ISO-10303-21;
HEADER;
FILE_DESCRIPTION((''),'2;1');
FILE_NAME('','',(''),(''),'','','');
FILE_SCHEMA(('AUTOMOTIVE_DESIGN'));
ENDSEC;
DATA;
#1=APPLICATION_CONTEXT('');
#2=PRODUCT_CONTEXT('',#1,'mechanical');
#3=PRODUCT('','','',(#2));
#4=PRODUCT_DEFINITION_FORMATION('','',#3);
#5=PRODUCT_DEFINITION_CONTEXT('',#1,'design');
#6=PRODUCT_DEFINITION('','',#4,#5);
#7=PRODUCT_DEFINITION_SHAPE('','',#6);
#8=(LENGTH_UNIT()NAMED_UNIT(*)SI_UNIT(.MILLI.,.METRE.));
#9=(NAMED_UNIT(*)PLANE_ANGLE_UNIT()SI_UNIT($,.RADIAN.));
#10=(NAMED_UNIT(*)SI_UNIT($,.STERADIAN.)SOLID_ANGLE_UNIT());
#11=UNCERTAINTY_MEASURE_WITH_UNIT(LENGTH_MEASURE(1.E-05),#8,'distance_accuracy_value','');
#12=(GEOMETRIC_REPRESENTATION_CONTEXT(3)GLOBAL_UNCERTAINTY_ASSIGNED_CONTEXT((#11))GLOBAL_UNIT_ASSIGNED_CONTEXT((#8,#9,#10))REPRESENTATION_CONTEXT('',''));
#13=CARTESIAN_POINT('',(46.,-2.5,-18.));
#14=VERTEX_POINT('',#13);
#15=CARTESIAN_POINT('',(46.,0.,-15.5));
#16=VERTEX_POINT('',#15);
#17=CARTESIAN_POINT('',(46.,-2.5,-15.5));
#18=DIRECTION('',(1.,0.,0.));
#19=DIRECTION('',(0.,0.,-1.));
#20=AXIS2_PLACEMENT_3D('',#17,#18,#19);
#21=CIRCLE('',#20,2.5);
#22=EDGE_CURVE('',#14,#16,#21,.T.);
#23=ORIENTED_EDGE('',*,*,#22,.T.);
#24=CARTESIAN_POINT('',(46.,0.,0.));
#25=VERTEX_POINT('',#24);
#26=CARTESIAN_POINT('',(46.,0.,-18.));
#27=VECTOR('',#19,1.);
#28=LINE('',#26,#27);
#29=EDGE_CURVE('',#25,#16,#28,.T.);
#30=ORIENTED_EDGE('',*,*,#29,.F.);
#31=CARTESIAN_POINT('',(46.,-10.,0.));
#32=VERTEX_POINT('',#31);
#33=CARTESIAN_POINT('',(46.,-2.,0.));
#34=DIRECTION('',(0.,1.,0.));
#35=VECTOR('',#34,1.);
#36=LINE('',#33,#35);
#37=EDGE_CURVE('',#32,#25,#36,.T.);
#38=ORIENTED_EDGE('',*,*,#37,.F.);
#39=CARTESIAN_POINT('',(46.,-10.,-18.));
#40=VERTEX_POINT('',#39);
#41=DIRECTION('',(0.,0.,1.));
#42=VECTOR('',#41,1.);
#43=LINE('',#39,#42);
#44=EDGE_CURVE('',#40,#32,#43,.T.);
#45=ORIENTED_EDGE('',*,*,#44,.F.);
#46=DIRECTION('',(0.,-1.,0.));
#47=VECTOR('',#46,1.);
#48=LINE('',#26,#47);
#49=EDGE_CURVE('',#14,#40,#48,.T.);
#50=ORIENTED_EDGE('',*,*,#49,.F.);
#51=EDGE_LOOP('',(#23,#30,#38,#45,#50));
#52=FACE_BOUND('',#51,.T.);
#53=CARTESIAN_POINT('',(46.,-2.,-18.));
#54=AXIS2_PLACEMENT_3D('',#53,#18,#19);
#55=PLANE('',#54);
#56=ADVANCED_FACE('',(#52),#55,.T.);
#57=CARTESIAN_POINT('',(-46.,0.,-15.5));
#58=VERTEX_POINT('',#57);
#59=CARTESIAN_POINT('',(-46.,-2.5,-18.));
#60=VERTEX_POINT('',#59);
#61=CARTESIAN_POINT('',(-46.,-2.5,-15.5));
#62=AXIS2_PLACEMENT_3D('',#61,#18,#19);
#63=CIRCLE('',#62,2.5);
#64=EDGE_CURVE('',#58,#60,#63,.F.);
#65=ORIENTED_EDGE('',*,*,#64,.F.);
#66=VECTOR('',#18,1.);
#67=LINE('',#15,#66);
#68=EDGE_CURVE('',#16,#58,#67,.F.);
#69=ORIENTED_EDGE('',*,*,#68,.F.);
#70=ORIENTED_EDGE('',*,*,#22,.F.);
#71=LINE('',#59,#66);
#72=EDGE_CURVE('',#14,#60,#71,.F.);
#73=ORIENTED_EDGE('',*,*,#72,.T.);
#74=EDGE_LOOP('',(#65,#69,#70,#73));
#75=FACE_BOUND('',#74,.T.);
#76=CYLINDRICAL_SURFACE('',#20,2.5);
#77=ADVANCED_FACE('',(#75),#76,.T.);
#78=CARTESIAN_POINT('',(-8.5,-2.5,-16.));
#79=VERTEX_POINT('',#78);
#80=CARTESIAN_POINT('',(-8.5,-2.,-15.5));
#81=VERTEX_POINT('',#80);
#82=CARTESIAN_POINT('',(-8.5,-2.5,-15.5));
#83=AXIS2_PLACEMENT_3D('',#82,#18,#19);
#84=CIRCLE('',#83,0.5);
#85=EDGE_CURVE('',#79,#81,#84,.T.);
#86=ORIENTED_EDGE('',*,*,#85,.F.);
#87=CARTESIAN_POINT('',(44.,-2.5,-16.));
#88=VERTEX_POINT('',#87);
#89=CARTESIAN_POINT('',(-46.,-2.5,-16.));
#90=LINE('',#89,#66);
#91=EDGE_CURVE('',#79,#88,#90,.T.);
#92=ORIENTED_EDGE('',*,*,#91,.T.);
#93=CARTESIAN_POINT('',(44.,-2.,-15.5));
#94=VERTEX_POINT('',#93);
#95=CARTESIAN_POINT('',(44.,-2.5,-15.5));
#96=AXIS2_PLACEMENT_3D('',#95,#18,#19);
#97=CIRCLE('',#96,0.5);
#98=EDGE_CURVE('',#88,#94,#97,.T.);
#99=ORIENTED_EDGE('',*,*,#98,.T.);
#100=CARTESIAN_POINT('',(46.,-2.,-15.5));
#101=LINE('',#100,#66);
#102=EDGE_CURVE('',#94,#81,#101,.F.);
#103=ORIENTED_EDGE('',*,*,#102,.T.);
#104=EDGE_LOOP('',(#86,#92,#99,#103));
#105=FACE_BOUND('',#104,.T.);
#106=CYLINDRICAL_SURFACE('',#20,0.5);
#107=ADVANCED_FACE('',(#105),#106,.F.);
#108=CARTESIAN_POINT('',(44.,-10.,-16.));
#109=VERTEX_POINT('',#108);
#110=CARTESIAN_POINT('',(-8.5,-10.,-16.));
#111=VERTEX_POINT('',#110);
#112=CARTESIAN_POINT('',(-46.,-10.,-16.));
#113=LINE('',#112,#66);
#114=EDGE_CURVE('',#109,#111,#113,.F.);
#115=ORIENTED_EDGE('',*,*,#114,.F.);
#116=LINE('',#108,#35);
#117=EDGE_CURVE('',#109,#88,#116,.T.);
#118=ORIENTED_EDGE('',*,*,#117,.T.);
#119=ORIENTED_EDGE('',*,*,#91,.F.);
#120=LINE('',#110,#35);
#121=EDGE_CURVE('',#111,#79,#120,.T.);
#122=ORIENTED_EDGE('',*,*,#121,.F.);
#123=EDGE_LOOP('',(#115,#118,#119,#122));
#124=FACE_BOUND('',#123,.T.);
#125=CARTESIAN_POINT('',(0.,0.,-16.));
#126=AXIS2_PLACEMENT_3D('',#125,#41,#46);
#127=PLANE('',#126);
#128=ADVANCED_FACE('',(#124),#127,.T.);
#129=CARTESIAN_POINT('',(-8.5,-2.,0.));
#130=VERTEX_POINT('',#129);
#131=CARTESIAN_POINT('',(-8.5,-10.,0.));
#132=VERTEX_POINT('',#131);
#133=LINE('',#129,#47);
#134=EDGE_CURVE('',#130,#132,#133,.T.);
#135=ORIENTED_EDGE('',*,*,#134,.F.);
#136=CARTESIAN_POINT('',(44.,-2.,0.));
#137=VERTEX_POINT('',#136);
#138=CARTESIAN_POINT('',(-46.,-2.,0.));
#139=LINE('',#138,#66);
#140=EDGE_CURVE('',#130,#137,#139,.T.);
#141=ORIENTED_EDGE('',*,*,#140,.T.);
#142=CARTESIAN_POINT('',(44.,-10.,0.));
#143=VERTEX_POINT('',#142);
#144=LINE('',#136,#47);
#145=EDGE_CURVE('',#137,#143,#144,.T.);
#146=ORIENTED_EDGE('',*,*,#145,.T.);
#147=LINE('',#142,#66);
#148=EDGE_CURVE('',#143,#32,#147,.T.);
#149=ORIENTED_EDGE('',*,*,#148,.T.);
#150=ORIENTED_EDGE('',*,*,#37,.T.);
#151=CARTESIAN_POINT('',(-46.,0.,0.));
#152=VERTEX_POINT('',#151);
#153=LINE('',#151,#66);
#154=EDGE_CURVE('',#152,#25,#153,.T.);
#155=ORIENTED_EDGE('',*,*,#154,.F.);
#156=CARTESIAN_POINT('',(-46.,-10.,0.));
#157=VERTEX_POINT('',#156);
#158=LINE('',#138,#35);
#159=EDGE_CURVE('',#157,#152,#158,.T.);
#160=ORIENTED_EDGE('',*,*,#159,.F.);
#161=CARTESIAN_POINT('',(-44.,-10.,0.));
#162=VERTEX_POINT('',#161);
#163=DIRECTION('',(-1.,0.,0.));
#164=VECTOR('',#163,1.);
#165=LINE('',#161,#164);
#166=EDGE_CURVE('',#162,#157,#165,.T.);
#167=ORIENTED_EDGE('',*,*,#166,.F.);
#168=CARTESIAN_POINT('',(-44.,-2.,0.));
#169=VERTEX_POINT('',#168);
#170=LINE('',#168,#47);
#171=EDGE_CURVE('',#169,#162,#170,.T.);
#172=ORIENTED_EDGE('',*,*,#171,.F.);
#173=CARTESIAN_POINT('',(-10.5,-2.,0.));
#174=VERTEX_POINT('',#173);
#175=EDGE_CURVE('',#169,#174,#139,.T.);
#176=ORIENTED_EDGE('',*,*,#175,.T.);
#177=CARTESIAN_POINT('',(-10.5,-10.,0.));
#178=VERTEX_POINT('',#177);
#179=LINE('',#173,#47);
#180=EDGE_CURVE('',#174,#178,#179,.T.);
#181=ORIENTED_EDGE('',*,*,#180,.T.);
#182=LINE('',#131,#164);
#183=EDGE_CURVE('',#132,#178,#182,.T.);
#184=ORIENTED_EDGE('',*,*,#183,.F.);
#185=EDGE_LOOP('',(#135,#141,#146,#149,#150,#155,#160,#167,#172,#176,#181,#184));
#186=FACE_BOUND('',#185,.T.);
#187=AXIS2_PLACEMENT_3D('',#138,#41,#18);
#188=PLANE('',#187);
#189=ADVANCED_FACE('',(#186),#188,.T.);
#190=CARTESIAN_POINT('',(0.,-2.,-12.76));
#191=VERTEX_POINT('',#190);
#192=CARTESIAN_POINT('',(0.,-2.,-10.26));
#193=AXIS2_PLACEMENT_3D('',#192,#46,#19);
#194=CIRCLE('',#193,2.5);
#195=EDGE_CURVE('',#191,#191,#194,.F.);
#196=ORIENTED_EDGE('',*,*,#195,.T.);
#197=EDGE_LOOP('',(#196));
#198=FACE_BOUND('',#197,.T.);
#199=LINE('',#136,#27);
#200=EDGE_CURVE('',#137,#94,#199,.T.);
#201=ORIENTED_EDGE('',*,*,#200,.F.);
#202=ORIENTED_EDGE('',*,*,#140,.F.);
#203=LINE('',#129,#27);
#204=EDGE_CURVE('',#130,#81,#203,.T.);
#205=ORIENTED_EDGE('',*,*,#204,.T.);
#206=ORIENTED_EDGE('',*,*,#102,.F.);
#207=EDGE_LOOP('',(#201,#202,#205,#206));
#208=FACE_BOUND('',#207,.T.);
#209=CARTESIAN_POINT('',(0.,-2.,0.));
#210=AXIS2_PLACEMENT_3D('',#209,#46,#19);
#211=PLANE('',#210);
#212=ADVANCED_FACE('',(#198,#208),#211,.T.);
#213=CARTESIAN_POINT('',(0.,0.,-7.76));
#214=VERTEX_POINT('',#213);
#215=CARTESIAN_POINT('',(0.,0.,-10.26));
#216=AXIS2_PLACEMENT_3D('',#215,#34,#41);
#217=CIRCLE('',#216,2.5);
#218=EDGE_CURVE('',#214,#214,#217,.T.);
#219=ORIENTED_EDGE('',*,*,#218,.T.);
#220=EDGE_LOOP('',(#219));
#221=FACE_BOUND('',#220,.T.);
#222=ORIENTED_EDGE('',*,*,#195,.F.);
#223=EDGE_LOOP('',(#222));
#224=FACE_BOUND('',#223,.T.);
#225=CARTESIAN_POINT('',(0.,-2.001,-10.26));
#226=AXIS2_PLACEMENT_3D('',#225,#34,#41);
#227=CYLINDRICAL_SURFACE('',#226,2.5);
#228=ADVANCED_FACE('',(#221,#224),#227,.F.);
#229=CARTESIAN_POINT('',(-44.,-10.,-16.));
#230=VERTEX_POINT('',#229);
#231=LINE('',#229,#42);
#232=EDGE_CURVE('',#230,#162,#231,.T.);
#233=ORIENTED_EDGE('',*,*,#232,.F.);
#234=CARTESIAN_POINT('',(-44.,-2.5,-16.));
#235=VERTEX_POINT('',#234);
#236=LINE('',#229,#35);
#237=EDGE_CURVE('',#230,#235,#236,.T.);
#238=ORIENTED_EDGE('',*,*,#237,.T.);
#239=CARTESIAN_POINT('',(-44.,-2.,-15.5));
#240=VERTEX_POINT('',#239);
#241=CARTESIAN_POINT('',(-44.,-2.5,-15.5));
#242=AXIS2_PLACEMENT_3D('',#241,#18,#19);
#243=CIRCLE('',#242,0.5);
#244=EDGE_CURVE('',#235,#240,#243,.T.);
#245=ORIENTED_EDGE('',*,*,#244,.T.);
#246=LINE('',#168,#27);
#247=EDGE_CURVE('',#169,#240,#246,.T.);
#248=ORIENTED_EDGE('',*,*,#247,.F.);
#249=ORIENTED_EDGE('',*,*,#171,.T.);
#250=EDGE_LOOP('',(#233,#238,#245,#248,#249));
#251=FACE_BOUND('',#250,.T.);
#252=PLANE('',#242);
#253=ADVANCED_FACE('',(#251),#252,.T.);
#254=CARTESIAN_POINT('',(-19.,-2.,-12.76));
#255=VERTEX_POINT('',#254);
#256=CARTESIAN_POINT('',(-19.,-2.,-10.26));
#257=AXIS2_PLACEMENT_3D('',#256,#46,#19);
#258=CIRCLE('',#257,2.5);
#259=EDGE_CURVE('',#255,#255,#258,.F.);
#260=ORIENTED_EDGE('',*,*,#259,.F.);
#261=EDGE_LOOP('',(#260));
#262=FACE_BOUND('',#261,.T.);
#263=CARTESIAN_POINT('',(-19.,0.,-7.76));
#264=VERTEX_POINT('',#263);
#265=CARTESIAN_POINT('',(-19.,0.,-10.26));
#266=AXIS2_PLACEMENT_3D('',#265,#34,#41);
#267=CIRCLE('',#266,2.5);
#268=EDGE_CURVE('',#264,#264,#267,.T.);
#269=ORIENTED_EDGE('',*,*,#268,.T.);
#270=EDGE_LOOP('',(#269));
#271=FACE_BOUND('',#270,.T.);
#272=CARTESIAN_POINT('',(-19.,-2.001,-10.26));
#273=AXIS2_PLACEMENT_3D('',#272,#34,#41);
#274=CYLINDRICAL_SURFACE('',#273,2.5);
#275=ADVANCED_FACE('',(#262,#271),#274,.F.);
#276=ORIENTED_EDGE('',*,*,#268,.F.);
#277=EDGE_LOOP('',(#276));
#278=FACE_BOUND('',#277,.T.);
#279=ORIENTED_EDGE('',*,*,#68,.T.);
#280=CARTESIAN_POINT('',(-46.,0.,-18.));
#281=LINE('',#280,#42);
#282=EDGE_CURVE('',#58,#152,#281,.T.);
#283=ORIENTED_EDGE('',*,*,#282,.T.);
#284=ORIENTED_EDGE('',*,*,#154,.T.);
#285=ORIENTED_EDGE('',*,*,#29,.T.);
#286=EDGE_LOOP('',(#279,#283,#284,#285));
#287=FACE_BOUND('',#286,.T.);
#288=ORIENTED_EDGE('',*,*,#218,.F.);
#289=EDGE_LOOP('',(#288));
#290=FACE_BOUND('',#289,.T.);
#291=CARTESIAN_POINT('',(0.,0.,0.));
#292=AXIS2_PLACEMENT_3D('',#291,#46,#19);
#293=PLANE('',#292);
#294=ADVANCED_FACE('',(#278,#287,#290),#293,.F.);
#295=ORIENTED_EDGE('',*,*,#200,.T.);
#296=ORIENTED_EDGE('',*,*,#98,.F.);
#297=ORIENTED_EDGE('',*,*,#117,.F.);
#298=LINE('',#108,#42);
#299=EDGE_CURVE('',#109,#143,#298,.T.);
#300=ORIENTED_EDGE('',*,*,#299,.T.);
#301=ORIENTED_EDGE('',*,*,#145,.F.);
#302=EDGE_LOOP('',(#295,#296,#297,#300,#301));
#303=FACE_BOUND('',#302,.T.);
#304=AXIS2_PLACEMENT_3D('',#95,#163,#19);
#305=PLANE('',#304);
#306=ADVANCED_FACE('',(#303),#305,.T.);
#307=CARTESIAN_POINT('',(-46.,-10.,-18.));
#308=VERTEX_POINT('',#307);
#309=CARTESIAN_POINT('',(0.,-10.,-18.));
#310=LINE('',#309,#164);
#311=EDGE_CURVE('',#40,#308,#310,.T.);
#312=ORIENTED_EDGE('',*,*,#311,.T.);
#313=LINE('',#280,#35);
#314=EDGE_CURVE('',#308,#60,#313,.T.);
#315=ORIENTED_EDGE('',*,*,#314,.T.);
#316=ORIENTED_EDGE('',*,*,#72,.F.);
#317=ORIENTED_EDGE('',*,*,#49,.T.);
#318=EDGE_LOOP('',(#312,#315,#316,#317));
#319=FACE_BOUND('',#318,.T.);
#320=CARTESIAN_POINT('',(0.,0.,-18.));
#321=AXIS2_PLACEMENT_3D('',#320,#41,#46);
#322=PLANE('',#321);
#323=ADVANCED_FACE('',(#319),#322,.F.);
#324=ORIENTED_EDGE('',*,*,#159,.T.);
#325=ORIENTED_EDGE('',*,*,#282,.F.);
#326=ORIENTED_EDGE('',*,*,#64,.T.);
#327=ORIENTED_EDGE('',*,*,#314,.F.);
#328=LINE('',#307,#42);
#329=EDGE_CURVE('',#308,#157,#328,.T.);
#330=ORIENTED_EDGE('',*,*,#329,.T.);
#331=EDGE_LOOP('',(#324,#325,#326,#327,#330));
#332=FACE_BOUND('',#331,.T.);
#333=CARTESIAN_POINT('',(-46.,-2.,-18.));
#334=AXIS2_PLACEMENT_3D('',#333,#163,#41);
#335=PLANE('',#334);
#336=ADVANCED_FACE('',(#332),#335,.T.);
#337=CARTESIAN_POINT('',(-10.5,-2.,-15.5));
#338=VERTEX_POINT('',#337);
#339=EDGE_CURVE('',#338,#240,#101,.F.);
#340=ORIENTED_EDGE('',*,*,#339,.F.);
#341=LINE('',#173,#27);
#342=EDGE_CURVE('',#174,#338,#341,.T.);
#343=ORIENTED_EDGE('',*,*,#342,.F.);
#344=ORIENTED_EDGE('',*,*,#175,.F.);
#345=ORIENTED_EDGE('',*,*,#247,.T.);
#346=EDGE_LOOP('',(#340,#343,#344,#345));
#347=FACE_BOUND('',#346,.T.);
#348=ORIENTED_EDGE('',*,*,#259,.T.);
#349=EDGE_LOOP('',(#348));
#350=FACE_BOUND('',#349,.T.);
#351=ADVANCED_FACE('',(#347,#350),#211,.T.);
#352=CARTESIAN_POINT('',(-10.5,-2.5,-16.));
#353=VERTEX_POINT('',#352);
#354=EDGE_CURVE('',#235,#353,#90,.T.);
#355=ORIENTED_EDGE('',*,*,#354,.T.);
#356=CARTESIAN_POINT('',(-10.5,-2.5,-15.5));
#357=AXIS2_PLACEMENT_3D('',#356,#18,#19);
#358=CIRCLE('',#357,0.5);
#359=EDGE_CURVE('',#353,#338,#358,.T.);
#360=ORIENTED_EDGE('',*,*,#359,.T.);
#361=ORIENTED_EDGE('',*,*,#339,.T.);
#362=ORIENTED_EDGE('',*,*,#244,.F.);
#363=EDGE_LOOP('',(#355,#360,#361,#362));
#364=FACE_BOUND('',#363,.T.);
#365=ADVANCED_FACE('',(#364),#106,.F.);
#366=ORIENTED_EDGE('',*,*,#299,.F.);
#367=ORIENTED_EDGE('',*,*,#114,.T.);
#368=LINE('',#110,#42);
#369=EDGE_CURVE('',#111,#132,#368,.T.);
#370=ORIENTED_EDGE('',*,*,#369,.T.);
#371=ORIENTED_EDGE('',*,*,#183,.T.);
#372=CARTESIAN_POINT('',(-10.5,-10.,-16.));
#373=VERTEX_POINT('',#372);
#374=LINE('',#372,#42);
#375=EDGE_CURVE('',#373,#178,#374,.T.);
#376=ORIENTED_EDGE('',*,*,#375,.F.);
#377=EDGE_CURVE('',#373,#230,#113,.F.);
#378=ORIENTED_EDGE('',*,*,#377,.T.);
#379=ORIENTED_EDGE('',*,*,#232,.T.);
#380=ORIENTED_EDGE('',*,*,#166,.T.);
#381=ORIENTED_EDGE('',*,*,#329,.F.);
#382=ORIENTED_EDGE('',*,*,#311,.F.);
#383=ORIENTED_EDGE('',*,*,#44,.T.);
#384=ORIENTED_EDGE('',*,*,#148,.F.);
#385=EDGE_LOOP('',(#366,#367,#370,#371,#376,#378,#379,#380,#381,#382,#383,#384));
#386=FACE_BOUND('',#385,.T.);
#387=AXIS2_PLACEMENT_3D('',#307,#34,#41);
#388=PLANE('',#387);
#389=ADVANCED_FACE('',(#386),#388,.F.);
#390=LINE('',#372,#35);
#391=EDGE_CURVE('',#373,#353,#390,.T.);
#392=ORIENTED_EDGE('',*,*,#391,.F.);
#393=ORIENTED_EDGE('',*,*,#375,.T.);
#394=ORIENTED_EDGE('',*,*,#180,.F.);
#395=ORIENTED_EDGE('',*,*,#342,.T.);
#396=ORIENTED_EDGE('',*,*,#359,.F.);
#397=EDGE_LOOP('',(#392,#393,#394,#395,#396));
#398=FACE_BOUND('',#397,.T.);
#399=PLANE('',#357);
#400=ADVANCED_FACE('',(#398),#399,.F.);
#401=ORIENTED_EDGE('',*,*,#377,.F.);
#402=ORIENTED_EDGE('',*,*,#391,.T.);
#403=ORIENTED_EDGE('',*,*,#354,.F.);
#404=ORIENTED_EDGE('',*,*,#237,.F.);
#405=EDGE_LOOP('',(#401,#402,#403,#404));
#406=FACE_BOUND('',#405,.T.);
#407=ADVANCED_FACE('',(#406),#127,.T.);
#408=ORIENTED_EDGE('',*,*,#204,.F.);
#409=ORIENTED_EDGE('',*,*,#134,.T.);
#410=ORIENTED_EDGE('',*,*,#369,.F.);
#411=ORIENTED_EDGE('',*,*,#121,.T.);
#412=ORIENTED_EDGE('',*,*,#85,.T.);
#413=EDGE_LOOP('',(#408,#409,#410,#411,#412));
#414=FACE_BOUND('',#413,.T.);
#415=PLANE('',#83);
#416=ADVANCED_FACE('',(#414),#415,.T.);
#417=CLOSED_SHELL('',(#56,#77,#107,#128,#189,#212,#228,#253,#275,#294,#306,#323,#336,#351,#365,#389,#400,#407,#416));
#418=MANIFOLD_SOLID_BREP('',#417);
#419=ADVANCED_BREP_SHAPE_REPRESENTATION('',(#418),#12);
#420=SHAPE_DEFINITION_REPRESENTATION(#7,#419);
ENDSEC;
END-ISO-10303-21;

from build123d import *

# Parameters (mm, degrees)
SKETCH1_W                    = 92
SKETCH1_H                    = 18
BASE_FLANGE1_DEPTH           = 2
SKETCH11_R                   = 2.5
CUT_EXTRUDE1_DEPTH           = 2
EDGE_FLANGE1_STRIP_W         = 9
EDGE_FLANGE1_STRIP_H         = 2
EDGE_FLANGE1_STRIP_CUT_DEPTH = 92
EDGE_FLANGE1_DEPTH           = 92
BOSS_EXTRUDE2_DEPTH          = 2
LPATTERN1_COUNT              = 2
LPATTERN1_PITCH              = 35.5


# Sheet-metal steps are written as plain solids
with BuildPart() as part:
    # Sketch1 → Base-Flange1 (new body)
    with BuildSketch(Plane(origin=(0, 0, 0), x_dir=(1, 0, 0), z_dir=(0, 1, 0))):
        with Locations((0, 9)):
            Rectangle(SKETCH1_W, SKETCH1_H)
    extrude(amount=-BASE_FLANGE1_DEPTH)

    # Sketch11 → Cut-Extrude1 (cut)
    with BuildSketch(Plane(origin=(0, 0, 0), x_dir=(1, 0, 0), z_dir=(0, 1, 0))):
        with Locations(Location((0, 10.26, 0), (0, 0, 270))):
            Circle(SKETCH11_R)
        with Locations(Location((-19, 10.26, 0), (0, 0, 270))):
            Circle(SKETCH11_R)
    extrude(amount=-CUT_EXTRUDE1_DEPTH, mode=Mode.SUBTRACT)

    # Edge-Flange1 strip (across the edge) → Edge-Flange1 strip cut (cut)
    with BuildSketch(Plane(origin=(-46, -2, -18), x_dir=(0, 0, 1), z_dir=(1, 0, 0))):
        with Locations((-2, -1)):
            Rectangle(EDGE_FLANGE1_STRIP_W, EDGE_FLANGE1_STRIP_H)
    extrude(amount=EDGE_FLANGE1_STRIP_CUT_DEPTH, mode=Mode.SUBTRACT)

    # Edge-Flange1 section (across the edge) → Edge-Flange1 (add)
    with BuildSketch(Plane(origin=(-46, -2, -18), x_dir=(0, 0, 1), z_dir=(1, 0, 0))):
        with BuildLine():
            Line((0, 0.5), (0, 8))
            Line((0, 8), (2, 8))
            Line((2, 8), (2, 0.5))
            ThreePointArc((2, 0.5), (2.146446609, 0.146446609), (2.5, 0))
            Line((2.5, 0), (2.5, -2))
            ThreePointArc((2.5, -2), (0.732233047, -1.267766953), (0, 0.5))
        make_face()
    extrude(amount=EDGE_FLANGE1_DEPTH)

    # Sketch18 → Boss-Extrude2 (add)
    with BuildSketch(Plane.ZY.offset(46)):
        with BuildLine():
            Line((0, -2), (-15.5, -2))
            ThreePointArc((-15.5, -2), (-15.853553391, -2.146446609), (-16, -2.5))
            Line((-16, -2.5), (-16, -10))
            Line((-16, -10), (0, -10))
            Line((0, -10), (0, -2))
        make_face()
    boss_extrude2 = extrude(amount=-BOSS_EXTRUDE2_DEPTH)

    # LPattern1: Boss-Extrude2 ×2
    with Locations(*[(i * LPATTERN1_PITCH, 0, 0) for i in range(1, LPATTERN1_COUNT)]):
        add(boss_extrude2)

    # Mirror2: Boss-Extrude2 across plane
    add(boss_extrude2.mirror(Plane(origin=(0, 0, 0), x_dir=(0, 0, 1), z_dir=(1, 0, 0))))


solid = part.part
